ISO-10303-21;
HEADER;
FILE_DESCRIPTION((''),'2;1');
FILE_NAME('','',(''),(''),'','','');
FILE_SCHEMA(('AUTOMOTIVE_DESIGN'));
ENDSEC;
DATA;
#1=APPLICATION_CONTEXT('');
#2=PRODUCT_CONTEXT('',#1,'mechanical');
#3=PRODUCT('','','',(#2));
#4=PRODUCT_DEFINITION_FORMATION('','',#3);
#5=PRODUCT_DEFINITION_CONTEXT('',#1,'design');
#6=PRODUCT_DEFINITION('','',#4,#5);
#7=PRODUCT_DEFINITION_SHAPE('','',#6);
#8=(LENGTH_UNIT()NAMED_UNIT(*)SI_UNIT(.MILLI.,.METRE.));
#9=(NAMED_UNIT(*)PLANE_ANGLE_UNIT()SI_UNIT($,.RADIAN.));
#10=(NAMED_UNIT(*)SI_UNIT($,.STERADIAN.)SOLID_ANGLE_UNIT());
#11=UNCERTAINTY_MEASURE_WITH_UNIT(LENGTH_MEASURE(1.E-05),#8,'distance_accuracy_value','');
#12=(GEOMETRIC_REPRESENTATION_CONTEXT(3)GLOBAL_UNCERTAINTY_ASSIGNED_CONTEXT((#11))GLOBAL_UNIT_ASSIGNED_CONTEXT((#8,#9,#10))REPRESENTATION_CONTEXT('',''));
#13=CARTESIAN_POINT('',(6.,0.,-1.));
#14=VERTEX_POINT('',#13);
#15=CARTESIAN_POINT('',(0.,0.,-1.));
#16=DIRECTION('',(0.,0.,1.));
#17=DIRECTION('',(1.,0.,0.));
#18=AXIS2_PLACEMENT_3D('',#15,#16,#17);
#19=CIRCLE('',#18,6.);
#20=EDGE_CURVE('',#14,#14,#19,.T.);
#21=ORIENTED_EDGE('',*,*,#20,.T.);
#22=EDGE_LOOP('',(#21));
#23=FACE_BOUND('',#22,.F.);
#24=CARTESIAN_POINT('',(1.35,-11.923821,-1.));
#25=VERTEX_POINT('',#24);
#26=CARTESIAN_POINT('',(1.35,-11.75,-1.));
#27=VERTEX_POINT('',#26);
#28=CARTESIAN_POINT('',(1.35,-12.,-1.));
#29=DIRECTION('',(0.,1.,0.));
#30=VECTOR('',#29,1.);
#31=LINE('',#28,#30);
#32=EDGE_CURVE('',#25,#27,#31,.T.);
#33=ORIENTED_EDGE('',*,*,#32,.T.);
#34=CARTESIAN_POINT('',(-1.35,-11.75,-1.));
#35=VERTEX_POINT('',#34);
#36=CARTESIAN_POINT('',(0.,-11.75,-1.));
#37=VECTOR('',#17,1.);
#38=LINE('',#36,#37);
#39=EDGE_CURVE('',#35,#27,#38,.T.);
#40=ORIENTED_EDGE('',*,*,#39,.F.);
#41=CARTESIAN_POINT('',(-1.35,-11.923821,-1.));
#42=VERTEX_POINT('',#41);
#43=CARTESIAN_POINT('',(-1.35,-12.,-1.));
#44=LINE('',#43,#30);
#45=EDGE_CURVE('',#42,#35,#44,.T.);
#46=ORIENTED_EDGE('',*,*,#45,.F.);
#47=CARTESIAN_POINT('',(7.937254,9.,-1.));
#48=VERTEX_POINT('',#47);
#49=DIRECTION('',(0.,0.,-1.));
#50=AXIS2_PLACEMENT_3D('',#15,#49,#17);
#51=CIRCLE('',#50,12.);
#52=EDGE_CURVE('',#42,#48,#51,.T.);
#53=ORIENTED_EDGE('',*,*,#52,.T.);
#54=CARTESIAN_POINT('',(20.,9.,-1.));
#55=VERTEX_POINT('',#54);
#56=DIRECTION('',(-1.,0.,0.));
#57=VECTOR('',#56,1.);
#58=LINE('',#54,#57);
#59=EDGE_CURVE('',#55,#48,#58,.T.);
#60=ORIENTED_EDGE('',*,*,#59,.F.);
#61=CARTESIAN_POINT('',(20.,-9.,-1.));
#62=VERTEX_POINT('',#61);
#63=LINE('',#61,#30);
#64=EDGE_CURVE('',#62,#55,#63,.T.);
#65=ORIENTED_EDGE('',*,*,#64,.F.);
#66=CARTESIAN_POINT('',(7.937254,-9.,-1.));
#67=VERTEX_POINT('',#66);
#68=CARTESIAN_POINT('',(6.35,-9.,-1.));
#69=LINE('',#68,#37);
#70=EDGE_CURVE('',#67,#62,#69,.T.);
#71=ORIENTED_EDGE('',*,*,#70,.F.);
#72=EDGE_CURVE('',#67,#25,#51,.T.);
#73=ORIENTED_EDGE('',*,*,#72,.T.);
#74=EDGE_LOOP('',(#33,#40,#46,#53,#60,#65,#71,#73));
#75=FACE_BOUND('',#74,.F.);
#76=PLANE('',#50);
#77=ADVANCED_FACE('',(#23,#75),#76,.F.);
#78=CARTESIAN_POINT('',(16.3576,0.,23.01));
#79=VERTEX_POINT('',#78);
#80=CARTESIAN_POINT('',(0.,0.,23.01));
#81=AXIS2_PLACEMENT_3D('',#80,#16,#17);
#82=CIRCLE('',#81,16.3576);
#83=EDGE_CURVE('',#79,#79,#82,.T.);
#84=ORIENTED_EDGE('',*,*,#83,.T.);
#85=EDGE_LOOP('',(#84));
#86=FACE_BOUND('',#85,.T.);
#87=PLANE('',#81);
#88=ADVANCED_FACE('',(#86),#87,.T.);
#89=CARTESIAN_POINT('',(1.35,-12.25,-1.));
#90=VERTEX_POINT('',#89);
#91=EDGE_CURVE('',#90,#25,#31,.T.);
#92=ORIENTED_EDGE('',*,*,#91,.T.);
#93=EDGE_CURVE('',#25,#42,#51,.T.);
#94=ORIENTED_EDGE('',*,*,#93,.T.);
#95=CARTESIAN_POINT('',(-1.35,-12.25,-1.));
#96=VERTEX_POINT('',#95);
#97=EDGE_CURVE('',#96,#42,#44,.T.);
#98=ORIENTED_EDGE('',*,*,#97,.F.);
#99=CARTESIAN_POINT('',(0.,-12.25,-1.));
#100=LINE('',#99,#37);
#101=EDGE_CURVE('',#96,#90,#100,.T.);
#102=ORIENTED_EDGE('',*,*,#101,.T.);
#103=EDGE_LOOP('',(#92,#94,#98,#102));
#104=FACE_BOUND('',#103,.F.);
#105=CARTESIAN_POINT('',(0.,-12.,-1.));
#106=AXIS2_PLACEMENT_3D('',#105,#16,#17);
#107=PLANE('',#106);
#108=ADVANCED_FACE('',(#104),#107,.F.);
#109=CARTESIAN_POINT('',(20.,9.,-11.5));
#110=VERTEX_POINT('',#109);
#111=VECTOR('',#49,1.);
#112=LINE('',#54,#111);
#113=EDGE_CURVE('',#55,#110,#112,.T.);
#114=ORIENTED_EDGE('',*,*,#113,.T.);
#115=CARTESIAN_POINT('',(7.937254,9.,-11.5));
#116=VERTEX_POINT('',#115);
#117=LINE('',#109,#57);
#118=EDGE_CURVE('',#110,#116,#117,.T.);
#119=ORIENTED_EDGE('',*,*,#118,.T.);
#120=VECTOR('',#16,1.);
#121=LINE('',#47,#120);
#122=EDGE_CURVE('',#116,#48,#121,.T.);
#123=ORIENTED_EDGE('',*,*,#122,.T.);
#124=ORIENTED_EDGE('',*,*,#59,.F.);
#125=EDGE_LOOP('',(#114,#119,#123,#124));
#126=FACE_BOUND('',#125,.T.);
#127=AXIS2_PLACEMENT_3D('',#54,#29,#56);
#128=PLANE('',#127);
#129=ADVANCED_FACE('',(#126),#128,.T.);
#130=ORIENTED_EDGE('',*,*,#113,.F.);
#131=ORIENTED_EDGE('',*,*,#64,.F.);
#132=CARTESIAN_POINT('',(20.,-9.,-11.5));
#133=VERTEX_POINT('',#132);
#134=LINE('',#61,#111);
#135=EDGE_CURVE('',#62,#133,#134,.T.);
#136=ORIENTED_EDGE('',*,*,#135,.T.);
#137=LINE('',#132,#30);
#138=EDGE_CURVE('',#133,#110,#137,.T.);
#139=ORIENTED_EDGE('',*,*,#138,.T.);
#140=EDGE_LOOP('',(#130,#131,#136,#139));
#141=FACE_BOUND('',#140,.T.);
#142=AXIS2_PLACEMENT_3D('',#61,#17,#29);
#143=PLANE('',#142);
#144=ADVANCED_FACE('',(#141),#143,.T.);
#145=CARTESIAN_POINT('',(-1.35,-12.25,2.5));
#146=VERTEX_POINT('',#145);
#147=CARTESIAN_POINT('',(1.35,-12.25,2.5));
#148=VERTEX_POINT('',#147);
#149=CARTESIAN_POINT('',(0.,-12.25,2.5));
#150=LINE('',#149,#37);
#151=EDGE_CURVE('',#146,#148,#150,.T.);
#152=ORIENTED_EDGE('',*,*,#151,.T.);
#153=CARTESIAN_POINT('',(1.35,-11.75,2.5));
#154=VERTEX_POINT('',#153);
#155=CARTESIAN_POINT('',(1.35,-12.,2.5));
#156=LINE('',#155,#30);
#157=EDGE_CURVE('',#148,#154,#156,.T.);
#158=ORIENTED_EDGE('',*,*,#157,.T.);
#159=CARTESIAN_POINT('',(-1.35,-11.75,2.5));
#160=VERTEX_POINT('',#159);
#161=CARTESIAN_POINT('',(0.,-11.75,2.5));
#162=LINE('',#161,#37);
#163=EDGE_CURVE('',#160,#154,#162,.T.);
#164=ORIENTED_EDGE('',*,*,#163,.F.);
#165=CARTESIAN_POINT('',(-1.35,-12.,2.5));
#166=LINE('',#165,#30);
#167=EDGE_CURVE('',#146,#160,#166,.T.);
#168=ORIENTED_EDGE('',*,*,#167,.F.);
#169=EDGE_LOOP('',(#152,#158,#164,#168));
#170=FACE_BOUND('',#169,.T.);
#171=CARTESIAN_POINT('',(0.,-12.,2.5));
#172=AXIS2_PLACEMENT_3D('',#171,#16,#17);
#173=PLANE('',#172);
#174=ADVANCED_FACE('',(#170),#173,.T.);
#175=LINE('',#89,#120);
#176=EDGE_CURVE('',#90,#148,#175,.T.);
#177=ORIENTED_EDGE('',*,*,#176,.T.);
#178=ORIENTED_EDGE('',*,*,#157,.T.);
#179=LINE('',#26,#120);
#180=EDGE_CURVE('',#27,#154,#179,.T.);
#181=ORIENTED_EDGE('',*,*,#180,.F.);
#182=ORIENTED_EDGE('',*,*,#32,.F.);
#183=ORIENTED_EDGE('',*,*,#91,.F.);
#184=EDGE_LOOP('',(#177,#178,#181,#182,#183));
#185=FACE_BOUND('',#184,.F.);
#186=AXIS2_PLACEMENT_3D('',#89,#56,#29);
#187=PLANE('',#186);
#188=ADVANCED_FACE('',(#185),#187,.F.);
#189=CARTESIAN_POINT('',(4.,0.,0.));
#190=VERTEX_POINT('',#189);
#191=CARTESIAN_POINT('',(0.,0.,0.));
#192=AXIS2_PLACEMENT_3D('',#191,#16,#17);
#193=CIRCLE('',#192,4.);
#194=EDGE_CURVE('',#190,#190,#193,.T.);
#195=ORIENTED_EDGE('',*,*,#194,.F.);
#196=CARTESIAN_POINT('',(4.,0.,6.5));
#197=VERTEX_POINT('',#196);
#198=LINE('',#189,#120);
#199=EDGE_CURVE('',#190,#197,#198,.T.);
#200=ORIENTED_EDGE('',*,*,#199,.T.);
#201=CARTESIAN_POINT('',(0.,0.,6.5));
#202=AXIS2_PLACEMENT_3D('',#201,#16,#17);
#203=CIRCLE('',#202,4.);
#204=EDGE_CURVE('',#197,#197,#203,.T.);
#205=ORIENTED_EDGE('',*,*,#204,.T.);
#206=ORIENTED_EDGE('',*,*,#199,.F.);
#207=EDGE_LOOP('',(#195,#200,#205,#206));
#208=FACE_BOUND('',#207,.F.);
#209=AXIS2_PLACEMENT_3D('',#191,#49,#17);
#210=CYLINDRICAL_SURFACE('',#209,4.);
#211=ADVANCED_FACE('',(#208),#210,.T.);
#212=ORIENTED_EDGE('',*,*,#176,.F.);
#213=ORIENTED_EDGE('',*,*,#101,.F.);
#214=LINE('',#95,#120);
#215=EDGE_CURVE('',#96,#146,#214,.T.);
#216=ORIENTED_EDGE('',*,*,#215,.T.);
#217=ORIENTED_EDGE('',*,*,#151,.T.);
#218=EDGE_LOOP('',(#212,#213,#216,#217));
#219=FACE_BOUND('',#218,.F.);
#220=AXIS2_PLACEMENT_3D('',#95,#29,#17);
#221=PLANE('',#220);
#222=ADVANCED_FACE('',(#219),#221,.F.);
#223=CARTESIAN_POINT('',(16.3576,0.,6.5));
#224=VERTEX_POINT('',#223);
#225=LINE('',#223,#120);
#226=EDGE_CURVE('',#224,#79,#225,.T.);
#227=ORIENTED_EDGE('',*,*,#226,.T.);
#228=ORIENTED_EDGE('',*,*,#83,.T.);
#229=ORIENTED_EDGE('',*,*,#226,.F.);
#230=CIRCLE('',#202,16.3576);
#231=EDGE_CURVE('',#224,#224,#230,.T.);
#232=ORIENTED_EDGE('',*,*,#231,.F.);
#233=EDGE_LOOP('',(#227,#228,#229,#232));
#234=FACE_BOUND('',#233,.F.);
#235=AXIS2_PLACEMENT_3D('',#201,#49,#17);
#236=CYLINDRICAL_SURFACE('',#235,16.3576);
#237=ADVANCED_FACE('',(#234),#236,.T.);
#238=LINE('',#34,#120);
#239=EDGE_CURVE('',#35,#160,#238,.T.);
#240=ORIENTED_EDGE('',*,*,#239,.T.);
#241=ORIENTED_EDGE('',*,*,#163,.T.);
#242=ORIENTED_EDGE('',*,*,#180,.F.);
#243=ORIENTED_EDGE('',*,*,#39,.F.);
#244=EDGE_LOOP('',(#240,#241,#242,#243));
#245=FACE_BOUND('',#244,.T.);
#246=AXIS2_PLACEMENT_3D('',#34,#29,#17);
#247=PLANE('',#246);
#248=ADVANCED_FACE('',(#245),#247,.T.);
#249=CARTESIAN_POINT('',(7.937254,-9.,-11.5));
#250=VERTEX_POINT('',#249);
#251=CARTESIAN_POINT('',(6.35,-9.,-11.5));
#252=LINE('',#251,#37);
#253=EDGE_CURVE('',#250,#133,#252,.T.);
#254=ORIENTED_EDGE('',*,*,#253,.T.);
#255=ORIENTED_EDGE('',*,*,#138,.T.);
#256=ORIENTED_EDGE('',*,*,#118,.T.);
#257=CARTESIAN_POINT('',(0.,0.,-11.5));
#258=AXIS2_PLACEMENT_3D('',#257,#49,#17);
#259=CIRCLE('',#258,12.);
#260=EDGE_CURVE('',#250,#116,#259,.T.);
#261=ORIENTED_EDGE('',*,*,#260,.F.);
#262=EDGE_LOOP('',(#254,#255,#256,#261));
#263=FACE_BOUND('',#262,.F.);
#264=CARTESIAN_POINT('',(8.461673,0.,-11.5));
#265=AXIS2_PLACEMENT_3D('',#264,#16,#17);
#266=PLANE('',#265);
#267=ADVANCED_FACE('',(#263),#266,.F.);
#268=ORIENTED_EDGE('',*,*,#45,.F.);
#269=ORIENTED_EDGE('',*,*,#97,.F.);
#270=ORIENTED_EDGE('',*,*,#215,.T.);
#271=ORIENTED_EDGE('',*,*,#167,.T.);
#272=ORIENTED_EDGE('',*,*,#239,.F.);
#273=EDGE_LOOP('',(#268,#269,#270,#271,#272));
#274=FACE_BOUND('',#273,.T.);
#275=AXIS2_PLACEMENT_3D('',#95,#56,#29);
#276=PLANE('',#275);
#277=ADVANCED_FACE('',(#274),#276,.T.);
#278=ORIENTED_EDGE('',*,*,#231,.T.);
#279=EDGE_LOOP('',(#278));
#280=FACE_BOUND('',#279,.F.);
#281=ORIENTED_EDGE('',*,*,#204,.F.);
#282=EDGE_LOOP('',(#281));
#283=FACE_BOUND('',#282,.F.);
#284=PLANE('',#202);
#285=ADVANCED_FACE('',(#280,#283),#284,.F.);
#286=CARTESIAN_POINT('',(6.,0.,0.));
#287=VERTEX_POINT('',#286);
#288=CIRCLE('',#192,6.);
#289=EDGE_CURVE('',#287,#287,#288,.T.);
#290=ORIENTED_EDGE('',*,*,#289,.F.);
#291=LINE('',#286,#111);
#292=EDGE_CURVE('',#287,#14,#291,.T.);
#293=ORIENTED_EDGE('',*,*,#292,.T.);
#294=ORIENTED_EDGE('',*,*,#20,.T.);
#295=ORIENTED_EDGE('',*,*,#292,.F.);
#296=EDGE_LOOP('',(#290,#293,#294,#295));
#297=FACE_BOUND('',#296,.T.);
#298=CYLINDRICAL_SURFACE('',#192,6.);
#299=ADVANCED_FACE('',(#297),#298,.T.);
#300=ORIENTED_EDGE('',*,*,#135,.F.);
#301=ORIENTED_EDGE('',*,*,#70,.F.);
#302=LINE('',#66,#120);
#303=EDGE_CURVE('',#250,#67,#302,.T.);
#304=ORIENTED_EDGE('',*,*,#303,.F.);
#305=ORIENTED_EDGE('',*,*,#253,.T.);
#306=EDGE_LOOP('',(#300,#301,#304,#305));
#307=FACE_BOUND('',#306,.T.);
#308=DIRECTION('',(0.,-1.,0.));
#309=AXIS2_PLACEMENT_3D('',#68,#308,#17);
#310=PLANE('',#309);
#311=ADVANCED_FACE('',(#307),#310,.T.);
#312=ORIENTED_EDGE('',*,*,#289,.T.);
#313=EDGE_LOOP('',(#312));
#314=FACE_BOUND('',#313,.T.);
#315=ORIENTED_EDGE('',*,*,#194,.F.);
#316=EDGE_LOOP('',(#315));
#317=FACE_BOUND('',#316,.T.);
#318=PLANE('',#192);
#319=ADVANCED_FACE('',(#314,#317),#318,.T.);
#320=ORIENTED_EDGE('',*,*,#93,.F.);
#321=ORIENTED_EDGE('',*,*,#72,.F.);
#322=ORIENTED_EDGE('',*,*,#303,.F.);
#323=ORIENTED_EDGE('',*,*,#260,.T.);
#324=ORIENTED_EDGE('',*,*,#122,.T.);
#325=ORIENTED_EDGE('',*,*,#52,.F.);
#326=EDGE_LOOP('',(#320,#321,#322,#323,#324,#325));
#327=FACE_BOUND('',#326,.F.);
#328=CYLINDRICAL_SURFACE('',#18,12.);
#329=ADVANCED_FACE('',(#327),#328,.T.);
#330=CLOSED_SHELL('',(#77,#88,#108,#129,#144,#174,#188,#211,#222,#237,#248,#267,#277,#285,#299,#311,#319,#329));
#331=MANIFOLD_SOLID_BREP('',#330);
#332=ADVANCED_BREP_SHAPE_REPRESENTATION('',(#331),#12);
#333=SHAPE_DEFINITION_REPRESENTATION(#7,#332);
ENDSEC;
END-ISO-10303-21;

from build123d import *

# Parameters (mm, degrees)
F0_R      = 6
F1_DEPTH  = 1
F2_R      = 12
F2_R_2    = 6
F3_DEPTH  = 10.5
F5_DEPTH  = 10.5
F6_R      = 4
F7_DEPTH  = 6.5
F8_R      = 3
F9_DEPTH  = 8.382
F10_W     = 2.7
F10_H     = 0.5
F11_DEPTH = 3.5
F12_R     = 16.3576
F13_DEPTH = 16.51


with BuildPart() as f1:
    # F0 (on Top) → F1 (new body)
    with BuildSketch(Plane.XY):
        Circle(F0_R)
    extrude(amount=-F1_DEPTH)

    # F2 (on face) → F3 (join)
    with BuildSketch(Plane(origin=(0, 0, -1), x_dir=(1, 0, 0), z_dir=(0, 0, -1))):
        Circle(F2_R)
        Circle(F2_R_2, mode=Mode.SUBTRACT)
        Circle(F2_R_2)
    extrude(amount=F3_DEPTH)

    # F4 (on face) → F5 (join, through all)
    with BuildSketch(Plane.XY.offset(-1)):
        with BuildLine():
            Line((6.35, 9), (6.35, -9))
            Line((6.35, -9), (7.9372539332, -9))
            ThreePointArc((7.9372539332, -9), (10.9372539332, -4.9372539332), (12, 0))
            ThreePointArc((12, 0), (10.9372539332, 4.9372539332), (7.9372539332, 9))
            Line((7.9372539332, 9), (6.35, 9))
        make_face()
        with BuildLine():
            ThreePointArc((12, 0), (10.9372539332, -4.9372539332), (7.9372539332, -9))
            Line((7.9372539332, -9), (20, -9))
            Line((20, -9), (20, 9))
            Line((20, 9), (7.9372539332, 9))
            ThreePointArc((7.9372539332, 9), (10.9372539332, 4.9372539332), (12, 0))
        make_face()
    extrude(amount=-F5_DEPTH)

    # F6 (on face) → F7 (join)
    with BuildSketch(Plane.XY):
        Circle(F6_R)
    extrude(amount=F7_DEPTH)

    # F8 (on face) → F9 (join)
    with BuildSketch(Plane.XY.offset(6.5)):
        Circle(F8_R)
    extrude(amount=F9_DEPTH)

    # F10 (on face) → F11 (join)
    with BuildSketch(Plane.XY.offset(-1)):
        with Locations((0, -12)):
            Rectangle(F10_W, F10_H)
    extrude(amount=F11_DEPTH)

    # F12 (on face) → F13 (join)
    with BuildSketch(Plane.XY.offset(6.5)):
        Circle(F12_R)
    extrude(amount=F13_DEPTH)


solid = f1.part
